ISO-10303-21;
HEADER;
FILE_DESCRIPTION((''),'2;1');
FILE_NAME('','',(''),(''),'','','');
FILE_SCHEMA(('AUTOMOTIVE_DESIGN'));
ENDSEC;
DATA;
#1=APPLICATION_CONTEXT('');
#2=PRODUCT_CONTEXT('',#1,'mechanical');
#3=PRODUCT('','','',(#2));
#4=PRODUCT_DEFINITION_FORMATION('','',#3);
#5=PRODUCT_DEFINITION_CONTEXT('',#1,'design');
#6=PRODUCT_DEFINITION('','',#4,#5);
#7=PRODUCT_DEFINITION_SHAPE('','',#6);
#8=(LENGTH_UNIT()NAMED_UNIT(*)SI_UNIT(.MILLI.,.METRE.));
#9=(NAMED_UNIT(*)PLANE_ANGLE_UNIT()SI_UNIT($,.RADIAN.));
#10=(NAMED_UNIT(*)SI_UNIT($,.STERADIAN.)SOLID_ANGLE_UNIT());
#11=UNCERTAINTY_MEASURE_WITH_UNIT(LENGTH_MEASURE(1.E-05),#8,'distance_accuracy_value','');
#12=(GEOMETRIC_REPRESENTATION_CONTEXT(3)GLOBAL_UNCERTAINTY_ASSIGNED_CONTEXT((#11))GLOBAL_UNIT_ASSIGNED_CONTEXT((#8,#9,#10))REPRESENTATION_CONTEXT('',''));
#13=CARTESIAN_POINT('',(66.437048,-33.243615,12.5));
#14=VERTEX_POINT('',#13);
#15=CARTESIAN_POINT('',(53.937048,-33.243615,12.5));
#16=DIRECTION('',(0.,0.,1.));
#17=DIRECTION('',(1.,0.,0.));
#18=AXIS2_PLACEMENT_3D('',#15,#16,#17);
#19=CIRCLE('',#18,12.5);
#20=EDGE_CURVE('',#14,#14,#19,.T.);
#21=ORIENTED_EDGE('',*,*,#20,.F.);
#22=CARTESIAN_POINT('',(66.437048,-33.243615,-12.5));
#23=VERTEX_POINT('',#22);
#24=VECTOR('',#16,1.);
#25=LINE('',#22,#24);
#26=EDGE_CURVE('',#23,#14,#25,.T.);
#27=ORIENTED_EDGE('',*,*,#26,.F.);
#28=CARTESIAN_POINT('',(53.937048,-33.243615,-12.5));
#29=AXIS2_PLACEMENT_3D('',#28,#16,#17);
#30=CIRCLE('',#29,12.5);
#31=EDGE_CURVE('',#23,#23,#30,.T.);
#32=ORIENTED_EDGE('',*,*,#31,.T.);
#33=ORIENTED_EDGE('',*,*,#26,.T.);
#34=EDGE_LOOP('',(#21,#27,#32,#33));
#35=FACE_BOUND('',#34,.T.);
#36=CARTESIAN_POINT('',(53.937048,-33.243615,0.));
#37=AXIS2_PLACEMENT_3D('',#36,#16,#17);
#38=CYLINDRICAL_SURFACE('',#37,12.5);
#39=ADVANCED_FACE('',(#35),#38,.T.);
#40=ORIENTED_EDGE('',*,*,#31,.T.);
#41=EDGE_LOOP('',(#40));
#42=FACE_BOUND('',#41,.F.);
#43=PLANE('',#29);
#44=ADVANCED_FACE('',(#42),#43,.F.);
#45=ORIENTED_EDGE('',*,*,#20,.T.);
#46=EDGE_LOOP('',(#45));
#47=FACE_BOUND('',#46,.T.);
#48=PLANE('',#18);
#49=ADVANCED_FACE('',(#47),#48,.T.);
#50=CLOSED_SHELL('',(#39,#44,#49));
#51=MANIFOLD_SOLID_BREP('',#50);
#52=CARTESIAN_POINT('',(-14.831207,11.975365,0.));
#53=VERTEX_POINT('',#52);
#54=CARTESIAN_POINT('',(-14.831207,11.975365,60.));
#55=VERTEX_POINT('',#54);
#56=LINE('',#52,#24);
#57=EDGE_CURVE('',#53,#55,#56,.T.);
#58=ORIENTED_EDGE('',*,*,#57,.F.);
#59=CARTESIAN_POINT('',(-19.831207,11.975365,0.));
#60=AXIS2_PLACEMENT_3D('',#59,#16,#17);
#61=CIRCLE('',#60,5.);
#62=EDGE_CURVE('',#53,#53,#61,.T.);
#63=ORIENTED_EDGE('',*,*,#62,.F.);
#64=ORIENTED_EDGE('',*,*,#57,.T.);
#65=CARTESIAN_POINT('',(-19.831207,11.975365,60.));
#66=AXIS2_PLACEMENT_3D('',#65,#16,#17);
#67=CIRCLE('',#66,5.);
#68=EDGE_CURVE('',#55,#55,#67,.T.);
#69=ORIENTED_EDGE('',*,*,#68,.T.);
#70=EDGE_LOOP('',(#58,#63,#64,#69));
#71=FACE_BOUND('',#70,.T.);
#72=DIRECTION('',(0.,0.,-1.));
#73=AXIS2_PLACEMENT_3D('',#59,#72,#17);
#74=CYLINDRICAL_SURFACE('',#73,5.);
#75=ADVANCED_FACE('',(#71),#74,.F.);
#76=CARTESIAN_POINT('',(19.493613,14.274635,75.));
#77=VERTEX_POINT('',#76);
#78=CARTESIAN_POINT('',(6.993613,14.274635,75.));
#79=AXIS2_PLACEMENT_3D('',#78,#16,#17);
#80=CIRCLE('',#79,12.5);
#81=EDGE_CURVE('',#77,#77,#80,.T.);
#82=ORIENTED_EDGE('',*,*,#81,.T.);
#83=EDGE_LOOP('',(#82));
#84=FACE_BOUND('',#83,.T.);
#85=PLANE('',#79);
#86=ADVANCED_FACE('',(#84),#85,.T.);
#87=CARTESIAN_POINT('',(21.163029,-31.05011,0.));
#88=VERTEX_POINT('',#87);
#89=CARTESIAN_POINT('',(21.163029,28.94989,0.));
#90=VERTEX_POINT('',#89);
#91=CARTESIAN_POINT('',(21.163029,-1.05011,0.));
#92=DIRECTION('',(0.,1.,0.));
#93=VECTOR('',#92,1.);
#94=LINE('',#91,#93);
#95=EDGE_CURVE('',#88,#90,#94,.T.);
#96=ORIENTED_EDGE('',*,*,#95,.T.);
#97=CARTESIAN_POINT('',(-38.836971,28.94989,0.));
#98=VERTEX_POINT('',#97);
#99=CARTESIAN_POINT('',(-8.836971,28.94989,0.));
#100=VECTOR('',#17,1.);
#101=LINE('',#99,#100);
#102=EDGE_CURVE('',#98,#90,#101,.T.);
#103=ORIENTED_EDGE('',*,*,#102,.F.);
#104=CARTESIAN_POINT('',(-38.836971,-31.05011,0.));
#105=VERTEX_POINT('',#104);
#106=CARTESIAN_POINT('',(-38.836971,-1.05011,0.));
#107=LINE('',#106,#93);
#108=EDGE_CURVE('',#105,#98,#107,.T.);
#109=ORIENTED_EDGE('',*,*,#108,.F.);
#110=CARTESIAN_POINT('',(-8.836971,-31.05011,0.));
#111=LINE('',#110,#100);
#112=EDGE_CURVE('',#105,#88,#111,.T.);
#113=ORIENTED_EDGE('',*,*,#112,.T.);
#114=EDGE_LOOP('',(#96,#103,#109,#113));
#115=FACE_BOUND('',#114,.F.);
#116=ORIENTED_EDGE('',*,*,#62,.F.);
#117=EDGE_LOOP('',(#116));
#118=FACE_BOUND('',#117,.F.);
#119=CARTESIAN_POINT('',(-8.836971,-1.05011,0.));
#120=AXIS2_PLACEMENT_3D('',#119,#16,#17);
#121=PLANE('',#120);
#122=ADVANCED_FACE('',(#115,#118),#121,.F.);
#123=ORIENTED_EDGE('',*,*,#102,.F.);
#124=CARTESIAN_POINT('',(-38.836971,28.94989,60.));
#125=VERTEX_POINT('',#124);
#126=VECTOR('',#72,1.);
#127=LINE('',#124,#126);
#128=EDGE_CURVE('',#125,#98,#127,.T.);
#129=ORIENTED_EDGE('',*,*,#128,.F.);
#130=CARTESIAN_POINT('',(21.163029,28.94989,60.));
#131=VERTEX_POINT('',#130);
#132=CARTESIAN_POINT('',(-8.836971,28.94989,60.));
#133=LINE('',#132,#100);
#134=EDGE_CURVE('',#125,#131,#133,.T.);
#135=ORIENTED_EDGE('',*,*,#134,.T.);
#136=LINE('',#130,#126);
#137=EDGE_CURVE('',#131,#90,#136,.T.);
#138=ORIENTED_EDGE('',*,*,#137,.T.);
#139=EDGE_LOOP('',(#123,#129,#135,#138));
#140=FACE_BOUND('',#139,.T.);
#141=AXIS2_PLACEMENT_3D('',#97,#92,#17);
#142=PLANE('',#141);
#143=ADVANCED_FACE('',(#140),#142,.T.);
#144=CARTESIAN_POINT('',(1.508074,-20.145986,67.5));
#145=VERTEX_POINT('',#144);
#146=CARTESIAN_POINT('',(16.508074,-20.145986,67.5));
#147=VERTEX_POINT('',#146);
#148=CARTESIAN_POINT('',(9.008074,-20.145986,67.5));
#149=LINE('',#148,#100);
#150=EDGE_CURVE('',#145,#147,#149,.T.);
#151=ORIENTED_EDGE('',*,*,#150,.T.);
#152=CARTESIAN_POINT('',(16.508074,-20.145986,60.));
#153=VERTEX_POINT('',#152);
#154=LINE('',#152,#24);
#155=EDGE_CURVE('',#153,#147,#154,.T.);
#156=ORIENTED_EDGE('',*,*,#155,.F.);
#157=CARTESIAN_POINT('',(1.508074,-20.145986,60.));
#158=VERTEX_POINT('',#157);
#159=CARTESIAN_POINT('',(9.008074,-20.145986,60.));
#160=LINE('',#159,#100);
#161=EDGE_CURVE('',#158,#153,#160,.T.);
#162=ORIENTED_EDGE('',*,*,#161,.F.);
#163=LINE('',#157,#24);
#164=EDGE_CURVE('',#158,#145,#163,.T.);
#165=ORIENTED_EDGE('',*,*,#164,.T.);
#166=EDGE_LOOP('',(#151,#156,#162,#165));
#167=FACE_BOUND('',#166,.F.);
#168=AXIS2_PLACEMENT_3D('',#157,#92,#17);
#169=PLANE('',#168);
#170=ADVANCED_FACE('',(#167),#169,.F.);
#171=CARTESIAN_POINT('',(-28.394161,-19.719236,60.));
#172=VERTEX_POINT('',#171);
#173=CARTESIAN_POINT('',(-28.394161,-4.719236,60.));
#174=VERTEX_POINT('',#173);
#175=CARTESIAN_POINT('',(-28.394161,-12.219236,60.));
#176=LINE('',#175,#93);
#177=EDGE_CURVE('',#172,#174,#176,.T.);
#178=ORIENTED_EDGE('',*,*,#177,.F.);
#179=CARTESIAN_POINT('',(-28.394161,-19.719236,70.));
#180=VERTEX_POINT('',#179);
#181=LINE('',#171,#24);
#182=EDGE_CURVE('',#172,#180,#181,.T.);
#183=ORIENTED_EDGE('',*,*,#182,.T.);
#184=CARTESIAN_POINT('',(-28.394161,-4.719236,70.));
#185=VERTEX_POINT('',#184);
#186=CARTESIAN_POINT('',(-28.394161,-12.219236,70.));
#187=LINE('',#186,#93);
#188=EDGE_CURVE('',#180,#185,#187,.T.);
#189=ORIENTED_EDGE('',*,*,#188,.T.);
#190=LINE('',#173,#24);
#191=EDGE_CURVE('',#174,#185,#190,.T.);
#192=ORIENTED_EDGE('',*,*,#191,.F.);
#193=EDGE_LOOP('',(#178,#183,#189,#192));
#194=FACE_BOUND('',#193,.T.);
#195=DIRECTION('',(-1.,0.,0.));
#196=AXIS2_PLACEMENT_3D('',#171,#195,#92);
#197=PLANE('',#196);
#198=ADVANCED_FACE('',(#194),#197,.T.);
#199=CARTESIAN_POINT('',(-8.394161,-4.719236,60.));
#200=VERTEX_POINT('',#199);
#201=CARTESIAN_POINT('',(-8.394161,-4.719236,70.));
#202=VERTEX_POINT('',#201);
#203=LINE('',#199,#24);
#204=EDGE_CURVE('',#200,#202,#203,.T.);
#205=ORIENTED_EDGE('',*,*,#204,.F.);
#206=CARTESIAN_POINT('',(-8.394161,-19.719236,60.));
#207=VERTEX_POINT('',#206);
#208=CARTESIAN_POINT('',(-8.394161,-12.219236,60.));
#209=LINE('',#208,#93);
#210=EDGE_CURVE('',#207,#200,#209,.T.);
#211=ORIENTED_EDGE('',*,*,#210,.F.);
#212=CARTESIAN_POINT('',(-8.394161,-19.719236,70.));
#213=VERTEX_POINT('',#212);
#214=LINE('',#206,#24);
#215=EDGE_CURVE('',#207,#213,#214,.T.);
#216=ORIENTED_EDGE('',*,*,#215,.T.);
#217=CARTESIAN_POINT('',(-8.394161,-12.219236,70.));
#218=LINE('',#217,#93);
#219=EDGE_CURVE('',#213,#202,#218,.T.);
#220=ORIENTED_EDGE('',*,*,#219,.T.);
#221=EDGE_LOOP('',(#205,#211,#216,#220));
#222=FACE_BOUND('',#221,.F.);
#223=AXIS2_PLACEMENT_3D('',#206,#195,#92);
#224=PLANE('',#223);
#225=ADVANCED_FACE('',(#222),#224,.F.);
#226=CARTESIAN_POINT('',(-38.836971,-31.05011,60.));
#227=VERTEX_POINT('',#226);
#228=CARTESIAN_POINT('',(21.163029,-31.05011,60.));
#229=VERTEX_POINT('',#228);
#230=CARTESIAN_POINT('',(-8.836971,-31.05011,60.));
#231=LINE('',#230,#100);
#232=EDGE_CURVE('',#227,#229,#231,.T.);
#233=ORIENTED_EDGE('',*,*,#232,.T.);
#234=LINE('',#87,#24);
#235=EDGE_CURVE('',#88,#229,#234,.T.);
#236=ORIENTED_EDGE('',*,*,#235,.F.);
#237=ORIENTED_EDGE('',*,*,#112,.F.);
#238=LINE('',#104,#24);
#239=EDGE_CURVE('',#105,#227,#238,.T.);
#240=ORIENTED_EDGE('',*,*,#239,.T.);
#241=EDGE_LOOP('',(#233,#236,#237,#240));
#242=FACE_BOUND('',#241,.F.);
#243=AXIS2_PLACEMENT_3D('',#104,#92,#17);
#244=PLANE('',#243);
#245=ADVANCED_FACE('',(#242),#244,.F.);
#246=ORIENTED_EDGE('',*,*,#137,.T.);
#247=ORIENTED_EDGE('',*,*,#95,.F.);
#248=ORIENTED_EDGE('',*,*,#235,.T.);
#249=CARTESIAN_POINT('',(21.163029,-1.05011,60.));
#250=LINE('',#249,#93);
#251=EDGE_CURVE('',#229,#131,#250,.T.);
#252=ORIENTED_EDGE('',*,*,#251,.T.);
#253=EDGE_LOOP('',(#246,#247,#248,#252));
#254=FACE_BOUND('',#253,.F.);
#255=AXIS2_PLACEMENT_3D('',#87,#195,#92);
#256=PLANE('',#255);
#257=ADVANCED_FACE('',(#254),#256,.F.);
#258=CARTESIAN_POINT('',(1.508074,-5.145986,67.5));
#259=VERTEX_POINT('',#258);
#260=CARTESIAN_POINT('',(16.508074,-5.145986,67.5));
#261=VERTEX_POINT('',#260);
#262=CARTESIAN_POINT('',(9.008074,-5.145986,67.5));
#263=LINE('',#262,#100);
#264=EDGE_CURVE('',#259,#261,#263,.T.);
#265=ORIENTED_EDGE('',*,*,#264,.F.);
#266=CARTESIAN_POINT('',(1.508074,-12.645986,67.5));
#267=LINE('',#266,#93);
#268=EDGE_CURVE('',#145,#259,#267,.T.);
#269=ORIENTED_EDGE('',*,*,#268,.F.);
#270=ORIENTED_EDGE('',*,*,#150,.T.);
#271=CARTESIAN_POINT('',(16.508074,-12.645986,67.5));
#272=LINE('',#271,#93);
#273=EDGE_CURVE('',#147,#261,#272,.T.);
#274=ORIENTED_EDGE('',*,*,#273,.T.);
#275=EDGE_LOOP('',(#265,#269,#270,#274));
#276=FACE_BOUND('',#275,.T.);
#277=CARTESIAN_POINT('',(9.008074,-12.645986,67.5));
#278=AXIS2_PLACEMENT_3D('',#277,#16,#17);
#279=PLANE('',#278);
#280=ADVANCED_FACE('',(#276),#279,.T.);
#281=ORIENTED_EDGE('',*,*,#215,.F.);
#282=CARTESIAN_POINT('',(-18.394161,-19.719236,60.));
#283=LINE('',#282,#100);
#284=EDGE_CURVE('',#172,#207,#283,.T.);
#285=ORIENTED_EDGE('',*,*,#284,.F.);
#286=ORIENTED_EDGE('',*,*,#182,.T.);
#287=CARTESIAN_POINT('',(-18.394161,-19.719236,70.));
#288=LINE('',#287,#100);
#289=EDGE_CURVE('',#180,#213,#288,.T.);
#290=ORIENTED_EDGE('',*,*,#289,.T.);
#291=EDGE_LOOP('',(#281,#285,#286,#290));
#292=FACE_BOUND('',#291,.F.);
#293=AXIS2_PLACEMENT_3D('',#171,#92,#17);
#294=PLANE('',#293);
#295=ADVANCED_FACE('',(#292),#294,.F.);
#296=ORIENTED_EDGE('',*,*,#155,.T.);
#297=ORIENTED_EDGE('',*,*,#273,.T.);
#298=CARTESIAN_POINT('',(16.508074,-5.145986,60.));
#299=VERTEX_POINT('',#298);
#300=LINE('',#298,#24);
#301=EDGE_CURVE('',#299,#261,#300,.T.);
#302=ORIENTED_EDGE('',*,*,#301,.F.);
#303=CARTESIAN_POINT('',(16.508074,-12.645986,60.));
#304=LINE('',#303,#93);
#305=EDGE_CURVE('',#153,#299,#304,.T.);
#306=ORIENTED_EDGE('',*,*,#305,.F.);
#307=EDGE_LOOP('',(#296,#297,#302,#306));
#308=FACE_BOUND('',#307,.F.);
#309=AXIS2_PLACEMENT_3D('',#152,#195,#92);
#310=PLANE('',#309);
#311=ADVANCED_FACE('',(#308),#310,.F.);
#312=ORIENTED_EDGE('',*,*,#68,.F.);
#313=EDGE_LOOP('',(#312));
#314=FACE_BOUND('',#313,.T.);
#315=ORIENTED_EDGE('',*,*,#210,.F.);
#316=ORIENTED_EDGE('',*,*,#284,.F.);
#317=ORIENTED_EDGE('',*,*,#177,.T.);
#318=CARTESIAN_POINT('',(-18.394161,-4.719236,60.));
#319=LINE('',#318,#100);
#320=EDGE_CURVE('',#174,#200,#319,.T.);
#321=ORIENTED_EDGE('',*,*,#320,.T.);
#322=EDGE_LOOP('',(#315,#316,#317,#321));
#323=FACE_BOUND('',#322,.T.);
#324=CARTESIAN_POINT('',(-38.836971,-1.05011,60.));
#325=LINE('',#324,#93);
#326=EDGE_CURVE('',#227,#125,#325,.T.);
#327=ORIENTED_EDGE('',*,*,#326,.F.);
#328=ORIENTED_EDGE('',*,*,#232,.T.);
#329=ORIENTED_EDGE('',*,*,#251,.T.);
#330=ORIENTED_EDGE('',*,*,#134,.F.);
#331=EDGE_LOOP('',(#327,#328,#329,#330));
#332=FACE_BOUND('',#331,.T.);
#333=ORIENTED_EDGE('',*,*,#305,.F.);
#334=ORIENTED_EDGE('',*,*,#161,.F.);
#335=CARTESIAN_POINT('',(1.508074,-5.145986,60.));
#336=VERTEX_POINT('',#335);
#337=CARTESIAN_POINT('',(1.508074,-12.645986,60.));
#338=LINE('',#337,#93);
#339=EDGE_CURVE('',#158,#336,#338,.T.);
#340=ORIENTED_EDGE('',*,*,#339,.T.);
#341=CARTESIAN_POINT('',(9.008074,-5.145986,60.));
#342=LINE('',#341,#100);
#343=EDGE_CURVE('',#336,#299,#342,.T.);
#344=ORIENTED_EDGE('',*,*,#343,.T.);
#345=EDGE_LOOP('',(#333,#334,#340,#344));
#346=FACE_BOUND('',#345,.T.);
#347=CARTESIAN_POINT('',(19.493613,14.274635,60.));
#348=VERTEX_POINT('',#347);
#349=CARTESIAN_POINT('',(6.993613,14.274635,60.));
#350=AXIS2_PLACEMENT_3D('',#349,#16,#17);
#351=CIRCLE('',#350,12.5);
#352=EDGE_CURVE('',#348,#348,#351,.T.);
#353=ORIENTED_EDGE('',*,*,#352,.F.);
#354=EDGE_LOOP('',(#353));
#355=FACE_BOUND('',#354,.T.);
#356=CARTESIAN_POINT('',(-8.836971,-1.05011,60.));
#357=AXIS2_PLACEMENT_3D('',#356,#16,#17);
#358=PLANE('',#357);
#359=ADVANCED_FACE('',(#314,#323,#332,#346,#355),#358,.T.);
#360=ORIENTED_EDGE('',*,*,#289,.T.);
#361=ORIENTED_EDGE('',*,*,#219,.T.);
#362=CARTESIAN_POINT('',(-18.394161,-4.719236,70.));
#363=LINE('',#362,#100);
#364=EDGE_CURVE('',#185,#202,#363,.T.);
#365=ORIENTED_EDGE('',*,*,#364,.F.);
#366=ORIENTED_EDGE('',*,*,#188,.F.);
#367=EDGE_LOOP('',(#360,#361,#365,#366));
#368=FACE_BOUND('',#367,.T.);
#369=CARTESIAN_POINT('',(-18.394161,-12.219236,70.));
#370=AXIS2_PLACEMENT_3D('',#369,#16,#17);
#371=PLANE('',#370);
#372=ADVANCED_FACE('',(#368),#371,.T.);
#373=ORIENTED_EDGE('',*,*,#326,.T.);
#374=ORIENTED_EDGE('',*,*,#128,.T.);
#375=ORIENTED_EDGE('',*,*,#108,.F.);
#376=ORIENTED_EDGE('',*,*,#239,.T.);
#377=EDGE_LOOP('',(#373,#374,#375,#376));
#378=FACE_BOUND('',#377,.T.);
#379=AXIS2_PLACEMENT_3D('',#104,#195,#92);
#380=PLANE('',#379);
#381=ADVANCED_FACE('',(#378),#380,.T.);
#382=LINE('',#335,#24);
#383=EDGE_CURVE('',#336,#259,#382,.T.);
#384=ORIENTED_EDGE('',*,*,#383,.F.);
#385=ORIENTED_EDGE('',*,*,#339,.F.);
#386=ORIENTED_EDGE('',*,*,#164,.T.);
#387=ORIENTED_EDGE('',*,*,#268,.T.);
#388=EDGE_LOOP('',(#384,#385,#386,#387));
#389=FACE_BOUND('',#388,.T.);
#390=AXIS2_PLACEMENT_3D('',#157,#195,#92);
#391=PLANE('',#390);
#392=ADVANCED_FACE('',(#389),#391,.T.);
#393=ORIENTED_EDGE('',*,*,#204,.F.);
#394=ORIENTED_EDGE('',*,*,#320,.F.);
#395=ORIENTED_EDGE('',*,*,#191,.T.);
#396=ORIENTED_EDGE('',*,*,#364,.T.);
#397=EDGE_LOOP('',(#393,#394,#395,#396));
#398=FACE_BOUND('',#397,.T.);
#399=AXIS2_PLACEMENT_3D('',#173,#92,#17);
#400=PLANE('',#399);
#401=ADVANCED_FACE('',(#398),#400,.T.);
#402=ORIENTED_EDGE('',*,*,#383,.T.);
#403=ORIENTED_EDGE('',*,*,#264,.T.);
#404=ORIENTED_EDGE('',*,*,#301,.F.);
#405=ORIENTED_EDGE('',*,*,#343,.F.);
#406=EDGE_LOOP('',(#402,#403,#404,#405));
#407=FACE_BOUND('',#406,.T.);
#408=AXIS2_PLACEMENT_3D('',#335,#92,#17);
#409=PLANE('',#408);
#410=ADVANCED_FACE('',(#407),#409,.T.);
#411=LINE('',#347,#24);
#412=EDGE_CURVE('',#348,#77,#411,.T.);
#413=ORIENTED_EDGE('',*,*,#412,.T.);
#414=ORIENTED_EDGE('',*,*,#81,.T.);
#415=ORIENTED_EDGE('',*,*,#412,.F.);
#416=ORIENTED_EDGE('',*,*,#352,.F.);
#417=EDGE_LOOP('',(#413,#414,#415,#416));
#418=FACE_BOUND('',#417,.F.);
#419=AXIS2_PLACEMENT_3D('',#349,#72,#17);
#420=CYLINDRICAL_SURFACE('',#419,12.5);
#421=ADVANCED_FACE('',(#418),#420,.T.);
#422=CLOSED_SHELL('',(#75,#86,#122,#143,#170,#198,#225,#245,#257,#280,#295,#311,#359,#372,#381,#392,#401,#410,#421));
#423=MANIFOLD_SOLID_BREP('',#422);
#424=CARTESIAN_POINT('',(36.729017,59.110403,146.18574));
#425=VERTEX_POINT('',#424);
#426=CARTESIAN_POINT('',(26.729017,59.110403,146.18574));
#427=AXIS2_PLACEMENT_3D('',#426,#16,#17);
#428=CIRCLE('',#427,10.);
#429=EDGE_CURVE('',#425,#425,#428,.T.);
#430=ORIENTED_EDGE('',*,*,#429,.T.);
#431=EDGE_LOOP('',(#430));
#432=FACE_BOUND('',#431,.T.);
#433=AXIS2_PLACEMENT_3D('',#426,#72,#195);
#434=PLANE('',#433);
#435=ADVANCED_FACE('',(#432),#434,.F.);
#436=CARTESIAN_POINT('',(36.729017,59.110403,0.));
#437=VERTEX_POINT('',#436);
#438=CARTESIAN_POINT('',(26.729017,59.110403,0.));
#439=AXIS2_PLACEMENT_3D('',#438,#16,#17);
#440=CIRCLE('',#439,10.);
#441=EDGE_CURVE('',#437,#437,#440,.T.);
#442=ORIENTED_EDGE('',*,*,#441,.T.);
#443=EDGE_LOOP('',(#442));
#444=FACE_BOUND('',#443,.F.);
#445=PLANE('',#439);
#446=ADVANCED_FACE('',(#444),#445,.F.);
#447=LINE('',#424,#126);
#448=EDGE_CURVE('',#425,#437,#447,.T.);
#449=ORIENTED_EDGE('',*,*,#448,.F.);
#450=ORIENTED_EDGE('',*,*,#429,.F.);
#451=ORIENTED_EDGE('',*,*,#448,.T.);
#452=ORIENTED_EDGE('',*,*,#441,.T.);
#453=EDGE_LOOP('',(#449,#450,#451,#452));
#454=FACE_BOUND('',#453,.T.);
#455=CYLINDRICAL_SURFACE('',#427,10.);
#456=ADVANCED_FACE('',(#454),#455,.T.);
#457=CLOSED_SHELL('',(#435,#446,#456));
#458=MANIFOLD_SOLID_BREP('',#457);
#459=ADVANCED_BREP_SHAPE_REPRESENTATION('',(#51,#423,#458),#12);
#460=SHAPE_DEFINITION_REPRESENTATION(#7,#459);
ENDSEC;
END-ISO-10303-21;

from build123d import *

# Parameters (mm, degrees)
F0_W      = 60
F0_H      = 60
F0_R      = 5
F1_DEPTH  = 60
F2_DEPTH  = 25
F3_W      = 20
F3_H      = 15
F4_DEPTH  = 10
F5_W      = 15
F5_H      = 15
F6_DEPTH  = 7.5
F7_R      = 12.5
F8_DEPTH  = 15
F9_R      = 10
F10_DEPTH = 75.001
F11_R     = 12.5
F12_DEPTH = 12.5


# Not quite as in the source:
# - a pattern or mirror of a feature is missing from the dataset's text; its kind, count and spacing are read off the source's solid


with BuildPart() as f1:
    # F0 (on Top) → F1 (new body)
    with BuildSketch(Plane.XY):
        with Locations((-8.8369709253, -1.0501102358)):
            Rectangle(F0_W, F0_H)
        with Locations((-19.8312066495, 11.9753647596)):
            Circle(F0_R, mode=Mode.SUBTRACT)
    extrude(amount=F1_DEPTH)

    # F0 (on Top) → F2 (join)
    with BuildSketch(Plane.XY):
        with Locations((-8.8369709253, -1.0501102358)):
            Rectangle(F0_W, F0_H)
        with Locations((-19.8312066495, 11.9753647596)):
            Circle(F0_R, mode=Mode.SUBTRACT)
    extrude(amount=F2_DEPTH)

    # F3 (on face) → F4 (join)
    with BuildSketch(Plane.XY.offset(60)):
        with Locations((-18.3941614814, -12.2192362325)):
            Rectangle(F3_W, F3_H)
    extrude(amount=F4_DEPTH)

    # F5 (on face) → F6 (join)
    with BuildSketch(Plane.XY.offset(60)):
        with Locations((9.0080741116, -12.6459863968)):
            Rectangle(F5_W, F5_H)
    extrude(amount=F6_DEPTH)

    # F7 (on face) → F8 (join)
    with BuildSketch(Plane.XY.offset(60)):
        with Locations((6.9936127402, 14.2746353522)):
            Circle(F7_R)
    extrude(amount=F8_DEPTH)


with BuildPart() as f10:
    # F9 (on Top) → F10 (new body, through all)
    with BuildSketch(Plane.XY):
        with Locations((26.7290174961, 59.1104030609)):
            Circle(F9_R)
    extrude(amount=F10_DEPTH)

    # F10_copies: F10 across plane


with BuildPart() as f10_1:
    add(f10.part)
    add(f10.part.mirror(Plane.XY.offset(73.09287)))


with BuildPart() as f12:
    # F11 (on Top) → F12 (new body, symmetric)
    with BuildSketch(Plane.XY):
        with Locations((53.93704772, -33.2436151803)):
            Circle(F11_R)
    extrude(amount=F12_DEPTH, both=True)


solid = Compound([f1.part, f10_1.part, f12.part])
